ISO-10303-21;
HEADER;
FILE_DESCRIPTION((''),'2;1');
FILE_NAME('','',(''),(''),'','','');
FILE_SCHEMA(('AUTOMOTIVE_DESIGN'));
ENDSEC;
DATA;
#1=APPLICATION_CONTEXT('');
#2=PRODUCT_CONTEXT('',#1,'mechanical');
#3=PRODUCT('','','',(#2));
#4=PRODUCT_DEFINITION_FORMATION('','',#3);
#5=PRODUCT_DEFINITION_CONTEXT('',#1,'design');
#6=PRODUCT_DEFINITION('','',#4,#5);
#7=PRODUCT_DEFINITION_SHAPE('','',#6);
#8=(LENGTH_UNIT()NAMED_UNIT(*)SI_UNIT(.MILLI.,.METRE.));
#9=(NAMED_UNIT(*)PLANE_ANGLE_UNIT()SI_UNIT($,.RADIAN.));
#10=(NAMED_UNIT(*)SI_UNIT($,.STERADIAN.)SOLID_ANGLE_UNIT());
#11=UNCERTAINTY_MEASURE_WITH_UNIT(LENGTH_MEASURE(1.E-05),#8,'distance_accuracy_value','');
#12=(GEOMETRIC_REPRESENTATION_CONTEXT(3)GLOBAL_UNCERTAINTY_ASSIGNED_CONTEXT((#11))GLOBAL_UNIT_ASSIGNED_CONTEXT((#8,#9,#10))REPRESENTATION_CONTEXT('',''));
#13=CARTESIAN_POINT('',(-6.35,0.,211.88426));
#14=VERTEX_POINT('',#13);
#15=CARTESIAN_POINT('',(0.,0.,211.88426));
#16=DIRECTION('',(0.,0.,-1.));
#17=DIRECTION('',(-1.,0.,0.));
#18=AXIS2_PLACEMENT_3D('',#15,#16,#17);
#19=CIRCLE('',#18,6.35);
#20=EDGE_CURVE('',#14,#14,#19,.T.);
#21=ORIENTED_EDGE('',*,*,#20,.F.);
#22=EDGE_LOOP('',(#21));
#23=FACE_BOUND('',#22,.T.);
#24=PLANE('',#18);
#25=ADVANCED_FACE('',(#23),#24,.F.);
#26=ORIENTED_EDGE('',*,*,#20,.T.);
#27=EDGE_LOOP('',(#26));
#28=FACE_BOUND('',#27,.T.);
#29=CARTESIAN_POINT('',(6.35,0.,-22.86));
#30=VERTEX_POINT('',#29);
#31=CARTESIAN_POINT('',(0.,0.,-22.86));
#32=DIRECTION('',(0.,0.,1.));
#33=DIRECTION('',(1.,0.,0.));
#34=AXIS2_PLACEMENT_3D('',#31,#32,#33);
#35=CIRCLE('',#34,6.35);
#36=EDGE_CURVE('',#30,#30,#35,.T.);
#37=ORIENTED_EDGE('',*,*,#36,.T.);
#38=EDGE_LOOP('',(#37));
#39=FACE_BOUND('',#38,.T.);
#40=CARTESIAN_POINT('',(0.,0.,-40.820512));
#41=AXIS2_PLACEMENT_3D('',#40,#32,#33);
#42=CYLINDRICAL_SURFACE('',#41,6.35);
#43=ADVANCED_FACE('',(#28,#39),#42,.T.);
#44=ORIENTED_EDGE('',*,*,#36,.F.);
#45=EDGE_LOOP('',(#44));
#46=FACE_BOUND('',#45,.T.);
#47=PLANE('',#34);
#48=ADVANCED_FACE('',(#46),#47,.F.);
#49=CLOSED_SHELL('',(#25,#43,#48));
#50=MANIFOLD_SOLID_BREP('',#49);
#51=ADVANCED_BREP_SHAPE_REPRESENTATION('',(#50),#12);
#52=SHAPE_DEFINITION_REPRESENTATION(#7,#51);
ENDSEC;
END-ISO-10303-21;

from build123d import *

# Parameters (mm, degrees)
BOSS_EXTRUDE1_OUTLINE_R = 6.35
BOSS_EXTRUDE1_DEPTH     = 234.74426


# Read off the part's stored shape, not the designer's step: Boss-Extrude1
with BuildPart() as part:
    # Boss-Extrude1 outline → Boss-Extrude1 (new body)
    with BuildSketch(Plane(origin=(0, 0, 211.88426), x_dir=(-1, 0, 0), z_dir=(0, 0, -1))):
        Circle(BOSS_EXTRUDE1_OUTLINE_R)
    extrude(amount=BOSS_EXTRUDE1_DEPTH)


solid = part.part
